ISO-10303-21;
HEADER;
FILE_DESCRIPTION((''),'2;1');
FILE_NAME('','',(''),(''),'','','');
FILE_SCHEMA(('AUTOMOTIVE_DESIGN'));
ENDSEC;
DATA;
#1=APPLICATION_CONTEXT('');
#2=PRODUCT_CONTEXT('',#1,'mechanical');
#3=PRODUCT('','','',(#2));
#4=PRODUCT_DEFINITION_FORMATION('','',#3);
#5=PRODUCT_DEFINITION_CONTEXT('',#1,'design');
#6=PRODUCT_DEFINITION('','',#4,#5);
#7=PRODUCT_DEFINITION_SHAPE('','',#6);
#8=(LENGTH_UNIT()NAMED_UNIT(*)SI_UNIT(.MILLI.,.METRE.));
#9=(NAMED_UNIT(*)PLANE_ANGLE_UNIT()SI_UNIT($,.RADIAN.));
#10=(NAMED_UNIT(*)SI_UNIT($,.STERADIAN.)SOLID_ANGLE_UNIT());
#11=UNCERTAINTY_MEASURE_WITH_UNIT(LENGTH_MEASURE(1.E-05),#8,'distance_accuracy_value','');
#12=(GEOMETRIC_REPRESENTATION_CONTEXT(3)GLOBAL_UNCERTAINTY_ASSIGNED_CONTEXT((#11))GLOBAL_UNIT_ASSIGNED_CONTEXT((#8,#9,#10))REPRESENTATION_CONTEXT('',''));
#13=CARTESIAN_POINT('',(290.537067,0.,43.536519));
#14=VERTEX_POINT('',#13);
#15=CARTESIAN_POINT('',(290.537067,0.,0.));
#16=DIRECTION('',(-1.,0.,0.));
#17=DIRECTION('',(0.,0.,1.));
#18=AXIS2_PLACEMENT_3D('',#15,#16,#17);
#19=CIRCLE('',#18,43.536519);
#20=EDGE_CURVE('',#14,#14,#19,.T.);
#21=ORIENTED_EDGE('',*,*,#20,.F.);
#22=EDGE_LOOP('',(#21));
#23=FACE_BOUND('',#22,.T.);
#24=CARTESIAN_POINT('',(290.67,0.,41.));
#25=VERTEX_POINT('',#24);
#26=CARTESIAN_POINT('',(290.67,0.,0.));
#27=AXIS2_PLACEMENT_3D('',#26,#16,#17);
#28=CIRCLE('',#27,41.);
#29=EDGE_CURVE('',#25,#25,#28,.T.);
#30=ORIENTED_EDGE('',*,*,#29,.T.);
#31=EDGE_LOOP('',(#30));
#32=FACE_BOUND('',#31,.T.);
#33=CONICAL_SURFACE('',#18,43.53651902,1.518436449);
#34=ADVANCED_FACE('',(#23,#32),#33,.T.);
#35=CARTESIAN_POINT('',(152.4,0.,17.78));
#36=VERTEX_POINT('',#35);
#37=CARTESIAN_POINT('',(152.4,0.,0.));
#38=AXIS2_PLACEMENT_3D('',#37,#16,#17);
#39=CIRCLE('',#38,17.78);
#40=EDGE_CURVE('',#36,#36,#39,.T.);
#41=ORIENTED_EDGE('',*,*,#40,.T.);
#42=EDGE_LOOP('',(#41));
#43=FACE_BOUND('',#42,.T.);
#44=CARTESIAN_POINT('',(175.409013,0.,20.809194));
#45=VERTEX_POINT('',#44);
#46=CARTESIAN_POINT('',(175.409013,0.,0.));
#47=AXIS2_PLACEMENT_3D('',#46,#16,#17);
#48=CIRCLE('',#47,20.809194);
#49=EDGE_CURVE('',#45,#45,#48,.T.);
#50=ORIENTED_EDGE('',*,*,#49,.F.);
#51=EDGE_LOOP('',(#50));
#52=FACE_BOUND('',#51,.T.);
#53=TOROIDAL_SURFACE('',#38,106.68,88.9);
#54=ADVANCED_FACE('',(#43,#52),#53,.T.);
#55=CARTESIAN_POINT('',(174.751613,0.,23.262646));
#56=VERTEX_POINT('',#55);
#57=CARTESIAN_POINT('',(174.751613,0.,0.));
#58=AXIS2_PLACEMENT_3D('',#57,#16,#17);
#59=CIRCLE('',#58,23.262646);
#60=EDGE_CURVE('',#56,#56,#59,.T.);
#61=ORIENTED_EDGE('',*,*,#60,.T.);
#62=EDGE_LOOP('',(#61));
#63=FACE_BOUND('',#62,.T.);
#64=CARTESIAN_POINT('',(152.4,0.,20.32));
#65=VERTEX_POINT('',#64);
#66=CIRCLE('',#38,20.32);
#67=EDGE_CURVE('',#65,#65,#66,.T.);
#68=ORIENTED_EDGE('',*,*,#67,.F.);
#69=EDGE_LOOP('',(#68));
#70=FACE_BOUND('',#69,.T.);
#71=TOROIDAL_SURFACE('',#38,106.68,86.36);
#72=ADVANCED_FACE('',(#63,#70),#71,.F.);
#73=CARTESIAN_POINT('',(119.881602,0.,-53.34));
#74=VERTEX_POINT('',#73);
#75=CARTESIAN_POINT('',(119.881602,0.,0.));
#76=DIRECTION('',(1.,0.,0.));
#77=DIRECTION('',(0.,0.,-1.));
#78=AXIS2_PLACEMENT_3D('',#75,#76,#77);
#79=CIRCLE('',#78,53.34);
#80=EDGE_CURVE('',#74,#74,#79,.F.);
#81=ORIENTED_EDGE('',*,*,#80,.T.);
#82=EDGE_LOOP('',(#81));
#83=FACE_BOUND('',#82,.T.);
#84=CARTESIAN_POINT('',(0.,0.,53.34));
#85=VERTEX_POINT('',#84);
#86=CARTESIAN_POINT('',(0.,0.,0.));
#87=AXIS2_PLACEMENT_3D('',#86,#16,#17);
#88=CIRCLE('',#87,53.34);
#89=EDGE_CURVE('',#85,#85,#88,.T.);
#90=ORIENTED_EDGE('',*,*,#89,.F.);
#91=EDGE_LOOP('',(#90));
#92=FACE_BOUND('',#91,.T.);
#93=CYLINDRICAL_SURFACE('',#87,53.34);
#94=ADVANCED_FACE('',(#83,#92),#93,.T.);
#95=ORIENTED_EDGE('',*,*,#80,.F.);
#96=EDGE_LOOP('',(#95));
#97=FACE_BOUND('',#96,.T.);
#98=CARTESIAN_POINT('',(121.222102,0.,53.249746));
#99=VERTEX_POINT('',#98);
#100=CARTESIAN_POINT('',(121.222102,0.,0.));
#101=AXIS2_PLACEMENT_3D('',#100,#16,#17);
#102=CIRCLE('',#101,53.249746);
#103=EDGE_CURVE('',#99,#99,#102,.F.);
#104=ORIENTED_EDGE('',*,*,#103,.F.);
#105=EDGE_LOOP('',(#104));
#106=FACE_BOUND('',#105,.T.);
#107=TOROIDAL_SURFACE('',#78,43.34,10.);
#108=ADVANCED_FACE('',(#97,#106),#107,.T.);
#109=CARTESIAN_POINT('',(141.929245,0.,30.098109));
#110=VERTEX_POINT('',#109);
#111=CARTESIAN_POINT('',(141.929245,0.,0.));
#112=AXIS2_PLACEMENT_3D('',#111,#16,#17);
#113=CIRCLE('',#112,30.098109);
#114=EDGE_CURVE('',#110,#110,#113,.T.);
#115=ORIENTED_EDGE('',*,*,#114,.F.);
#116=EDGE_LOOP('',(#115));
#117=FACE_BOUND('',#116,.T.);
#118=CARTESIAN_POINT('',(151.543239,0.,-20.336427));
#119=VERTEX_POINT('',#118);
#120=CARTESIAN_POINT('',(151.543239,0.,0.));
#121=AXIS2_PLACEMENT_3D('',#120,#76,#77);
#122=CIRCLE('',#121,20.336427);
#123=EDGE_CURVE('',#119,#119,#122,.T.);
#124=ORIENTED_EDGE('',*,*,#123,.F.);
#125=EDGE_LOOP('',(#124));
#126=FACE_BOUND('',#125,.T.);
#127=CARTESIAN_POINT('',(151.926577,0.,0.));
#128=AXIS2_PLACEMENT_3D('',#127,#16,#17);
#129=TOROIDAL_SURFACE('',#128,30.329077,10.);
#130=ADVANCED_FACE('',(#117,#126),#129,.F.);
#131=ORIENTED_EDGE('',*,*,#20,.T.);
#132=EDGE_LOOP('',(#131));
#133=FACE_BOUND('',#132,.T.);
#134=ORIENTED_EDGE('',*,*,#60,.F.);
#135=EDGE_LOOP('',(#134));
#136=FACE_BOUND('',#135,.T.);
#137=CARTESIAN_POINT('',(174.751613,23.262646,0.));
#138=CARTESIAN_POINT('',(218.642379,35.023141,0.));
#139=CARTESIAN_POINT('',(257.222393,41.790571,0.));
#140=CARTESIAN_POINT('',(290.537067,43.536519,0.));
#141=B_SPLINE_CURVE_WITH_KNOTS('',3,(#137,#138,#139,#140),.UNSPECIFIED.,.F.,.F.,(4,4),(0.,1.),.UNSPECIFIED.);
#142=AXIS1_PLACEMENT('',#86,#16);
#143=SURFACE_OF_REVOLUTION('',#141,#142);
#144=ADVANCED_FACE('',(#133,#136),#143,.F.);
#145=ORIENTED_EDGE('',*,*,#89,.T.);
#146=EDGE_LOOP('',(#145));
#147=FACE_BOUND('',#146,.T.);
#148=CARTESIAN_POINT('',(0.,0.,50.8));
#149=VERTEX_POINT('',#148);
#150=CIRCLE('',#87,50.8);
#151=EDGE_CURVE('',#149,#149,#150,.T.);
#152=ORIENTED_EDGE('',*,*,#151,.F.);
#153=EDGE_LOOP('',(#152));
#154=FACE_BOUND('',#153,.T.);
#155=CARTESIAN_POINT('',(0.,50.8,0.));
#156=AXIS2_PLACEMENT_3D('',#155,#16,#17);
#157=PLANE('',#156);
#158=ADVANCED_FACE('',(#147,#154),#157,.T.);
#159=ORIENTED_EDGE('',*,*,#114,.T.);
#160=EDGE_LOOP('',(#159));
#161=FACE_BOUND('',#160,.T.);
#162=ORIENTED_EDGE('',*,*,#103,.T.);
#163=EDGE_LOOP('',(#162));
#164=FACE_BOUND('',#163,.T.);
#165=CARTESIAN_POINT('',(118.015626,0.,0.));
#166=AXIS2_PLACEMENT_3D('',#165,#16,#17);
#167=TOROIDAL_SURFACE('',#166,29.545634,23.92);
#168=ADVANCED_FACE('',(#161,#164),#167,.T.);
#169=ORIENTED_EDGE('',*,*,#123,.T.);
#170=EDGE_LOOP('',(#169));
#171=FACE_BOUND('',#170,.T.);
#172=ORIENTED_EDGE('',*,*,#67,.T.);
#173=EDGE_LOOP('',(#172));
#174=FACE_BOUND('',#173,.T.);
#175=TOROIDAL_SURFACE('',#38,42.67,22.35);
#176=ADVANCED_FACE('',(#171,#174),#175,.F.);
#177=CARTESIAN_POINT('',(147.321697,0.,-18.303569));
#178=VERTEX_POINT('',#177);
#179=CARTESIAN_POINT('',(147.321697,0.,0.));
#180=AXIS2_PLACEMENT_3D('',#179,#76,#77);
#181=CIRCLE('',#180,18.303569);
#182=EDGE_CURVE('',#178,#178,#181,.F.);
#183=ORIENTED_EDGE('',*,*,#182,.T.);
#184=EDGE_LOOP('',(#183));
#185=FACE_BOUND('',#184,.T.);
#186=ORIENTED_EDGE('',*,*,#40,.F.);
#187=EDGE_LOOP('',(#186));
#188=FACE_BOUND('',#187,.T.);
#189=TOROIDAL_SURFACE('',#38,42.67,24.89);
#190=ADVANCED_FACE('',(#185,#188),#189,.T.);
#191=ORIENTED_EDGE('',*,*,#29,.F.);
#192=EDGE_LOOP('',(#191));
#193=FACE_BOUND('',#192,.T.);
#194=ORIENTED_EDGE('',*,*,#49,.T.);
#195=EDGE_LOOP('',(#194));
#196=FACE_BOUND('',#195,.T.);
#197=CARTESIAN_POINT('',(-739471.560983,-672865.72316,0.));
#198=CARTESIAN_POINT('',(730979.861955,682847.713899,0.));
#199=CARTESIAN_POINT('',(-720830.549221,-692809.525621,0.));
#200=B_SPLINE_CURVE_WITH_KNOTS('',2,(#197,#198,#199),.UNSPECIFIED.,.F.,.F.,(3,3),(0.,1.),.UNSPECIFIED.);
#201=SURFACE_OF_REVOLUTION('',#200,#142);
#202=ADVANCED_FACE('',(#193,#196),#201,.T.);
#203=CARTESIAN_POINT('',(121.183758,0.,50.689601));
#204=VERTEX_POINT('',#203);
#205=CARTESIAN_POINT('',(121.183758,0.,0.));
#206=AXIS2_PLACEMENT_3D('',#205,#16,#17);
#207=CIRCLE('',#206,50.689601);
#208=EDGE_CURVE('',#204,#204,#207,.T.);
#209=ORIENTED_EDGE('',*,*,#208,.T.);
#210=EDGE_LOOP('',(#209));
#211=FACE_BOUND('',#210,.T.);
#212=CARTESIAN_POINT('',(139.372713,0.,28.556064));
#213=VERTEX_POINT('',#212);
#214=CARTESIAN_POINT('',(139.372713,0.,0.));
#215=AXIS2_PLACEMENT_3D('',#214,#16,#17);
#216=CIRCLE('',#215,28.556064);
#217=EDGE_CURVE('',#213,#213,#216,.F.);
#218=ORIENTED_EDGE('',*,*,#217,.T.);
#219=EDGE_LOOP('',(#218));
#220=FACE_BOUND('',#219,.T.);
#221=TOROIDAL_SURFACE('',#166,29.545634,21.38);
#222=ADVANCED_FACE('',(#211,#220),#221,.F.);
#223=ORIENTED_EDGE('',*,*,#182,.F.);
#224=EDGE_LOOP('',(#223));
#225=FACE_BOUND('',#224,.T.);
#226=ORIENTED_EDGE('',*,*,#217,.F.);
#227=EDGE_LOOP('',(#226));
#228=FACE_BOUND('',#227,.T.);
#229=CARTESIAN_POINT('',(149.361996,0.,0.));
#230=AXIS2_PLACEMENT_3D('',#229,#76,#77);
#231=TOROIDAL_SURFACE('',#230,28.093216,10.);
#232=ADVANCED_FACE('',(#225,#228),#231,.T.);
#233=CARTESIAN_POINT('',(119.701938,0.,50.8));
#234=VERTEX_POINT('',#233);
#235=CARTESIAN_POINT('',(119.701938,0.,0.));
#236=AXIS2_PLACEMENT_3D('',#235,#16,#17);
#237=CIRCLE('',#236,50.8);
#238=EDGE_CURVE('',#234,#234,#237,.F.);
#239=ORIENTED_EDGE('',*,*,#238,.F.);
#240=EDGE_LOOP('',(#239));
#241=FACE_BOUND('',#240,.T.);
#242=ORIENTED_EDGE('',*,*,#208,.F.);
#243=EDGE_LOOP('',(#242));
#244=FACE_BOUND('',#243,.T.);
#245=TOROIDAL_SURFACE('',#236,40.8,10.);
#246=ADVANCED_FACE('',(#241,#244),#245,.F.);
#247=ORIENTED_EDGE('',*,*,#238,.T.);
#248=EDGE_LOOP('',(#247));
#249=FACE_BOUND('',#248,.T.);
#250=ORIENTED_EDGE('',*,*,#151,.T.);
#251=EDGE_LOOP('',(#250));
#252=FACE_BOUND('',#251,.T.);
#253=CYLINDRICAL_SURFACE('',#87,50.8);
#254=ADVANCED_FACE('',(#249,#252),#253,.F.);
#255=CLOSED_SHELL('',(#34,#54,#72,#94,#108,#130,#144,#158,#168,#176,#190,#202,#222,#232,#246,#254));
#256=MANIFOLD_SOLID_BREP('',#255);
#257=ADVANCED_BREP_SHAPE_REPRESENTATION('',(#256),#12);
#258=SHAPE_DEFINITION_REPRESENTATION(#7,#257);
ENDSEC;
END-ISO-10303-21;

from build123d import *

# Parameters (mm, degrees)
FILLET2_R = 10


# Read off the part's stored shape, not the designer's step: Revolve-Thin1
with BuildPart() as part:
    # Revolve-Thin1 outline → Revolve-Thin1 (revolve)
    with BuildSketch(Plane.YX):
        with BuildLine():
            ThreePointArc((20.809194043, 175.40901311), (18.540551824, 164.003778488), (17.78, 152.4))
            ThreePointArc((17.78, 152.4), (18.931985096, 144.91543265), (22.281305618, 138.123682499))
            ThreePointArc((22.281305618, 138.123682499), (40.863057404, 136.154543576), (50.8, 120.33))
            Line((50.8, 120.33), (50.8, 0))
            Line((50.8, 0), (53.34, 0))
            Line((53.34, 0), (53.34, 120.464002572))
            ThreePointArc((53.34, 120.464002572), (43.123071275, 137.708761877), (23.372253336, 141.125272789))
            ThreePointArc((23.372253336, 141.125272789), (21.096554077, 146.559714816), (20.32, 152.4))
            ThreePointArc((20.32, 152.4), (21.058821772, 163.67224196), (23.262645642, 174.751612735))
            add(Edge.make_bspline(
                [(23.262645642, 174.751612735), (35.023141074, 218.642379212), (41.79057094, 257.222392684), (43.53651902, 290.537066698)],
                knots=[0, 0, 0, 0, 1, 1, 1, 1], degree=3))
            Line((43.53651902, 290.537066698), (41.000000001, 290.670000027))
            add(Edge.make_bspline(
                [(41.000000001, 290.670000027), (38.399983722, 241.058733938), (20.809194043, 175.40901311)],
                knots=[0.495939659, 0.495939659, 0.495939659, 0.498282386, 0.498282386, 0.498282386], degree=2))
        make_face()
    revolve(axis=Axis((0, 0, 0), (1, 0, 0)))

    # Fillet2
    fillet2_edges = [part.edges().sort_by_distance(p)[0] for p in [
        (138.123682499, -22.281305618, 0),
        (120.33, -50.8, 0),
        (120.464002572, -53.34, 0),
        (141.125272789, -23.372253336, 0),
    ]]
    fillet(fillet2_edges, radius=FILLET2_R)


solid = part.part
